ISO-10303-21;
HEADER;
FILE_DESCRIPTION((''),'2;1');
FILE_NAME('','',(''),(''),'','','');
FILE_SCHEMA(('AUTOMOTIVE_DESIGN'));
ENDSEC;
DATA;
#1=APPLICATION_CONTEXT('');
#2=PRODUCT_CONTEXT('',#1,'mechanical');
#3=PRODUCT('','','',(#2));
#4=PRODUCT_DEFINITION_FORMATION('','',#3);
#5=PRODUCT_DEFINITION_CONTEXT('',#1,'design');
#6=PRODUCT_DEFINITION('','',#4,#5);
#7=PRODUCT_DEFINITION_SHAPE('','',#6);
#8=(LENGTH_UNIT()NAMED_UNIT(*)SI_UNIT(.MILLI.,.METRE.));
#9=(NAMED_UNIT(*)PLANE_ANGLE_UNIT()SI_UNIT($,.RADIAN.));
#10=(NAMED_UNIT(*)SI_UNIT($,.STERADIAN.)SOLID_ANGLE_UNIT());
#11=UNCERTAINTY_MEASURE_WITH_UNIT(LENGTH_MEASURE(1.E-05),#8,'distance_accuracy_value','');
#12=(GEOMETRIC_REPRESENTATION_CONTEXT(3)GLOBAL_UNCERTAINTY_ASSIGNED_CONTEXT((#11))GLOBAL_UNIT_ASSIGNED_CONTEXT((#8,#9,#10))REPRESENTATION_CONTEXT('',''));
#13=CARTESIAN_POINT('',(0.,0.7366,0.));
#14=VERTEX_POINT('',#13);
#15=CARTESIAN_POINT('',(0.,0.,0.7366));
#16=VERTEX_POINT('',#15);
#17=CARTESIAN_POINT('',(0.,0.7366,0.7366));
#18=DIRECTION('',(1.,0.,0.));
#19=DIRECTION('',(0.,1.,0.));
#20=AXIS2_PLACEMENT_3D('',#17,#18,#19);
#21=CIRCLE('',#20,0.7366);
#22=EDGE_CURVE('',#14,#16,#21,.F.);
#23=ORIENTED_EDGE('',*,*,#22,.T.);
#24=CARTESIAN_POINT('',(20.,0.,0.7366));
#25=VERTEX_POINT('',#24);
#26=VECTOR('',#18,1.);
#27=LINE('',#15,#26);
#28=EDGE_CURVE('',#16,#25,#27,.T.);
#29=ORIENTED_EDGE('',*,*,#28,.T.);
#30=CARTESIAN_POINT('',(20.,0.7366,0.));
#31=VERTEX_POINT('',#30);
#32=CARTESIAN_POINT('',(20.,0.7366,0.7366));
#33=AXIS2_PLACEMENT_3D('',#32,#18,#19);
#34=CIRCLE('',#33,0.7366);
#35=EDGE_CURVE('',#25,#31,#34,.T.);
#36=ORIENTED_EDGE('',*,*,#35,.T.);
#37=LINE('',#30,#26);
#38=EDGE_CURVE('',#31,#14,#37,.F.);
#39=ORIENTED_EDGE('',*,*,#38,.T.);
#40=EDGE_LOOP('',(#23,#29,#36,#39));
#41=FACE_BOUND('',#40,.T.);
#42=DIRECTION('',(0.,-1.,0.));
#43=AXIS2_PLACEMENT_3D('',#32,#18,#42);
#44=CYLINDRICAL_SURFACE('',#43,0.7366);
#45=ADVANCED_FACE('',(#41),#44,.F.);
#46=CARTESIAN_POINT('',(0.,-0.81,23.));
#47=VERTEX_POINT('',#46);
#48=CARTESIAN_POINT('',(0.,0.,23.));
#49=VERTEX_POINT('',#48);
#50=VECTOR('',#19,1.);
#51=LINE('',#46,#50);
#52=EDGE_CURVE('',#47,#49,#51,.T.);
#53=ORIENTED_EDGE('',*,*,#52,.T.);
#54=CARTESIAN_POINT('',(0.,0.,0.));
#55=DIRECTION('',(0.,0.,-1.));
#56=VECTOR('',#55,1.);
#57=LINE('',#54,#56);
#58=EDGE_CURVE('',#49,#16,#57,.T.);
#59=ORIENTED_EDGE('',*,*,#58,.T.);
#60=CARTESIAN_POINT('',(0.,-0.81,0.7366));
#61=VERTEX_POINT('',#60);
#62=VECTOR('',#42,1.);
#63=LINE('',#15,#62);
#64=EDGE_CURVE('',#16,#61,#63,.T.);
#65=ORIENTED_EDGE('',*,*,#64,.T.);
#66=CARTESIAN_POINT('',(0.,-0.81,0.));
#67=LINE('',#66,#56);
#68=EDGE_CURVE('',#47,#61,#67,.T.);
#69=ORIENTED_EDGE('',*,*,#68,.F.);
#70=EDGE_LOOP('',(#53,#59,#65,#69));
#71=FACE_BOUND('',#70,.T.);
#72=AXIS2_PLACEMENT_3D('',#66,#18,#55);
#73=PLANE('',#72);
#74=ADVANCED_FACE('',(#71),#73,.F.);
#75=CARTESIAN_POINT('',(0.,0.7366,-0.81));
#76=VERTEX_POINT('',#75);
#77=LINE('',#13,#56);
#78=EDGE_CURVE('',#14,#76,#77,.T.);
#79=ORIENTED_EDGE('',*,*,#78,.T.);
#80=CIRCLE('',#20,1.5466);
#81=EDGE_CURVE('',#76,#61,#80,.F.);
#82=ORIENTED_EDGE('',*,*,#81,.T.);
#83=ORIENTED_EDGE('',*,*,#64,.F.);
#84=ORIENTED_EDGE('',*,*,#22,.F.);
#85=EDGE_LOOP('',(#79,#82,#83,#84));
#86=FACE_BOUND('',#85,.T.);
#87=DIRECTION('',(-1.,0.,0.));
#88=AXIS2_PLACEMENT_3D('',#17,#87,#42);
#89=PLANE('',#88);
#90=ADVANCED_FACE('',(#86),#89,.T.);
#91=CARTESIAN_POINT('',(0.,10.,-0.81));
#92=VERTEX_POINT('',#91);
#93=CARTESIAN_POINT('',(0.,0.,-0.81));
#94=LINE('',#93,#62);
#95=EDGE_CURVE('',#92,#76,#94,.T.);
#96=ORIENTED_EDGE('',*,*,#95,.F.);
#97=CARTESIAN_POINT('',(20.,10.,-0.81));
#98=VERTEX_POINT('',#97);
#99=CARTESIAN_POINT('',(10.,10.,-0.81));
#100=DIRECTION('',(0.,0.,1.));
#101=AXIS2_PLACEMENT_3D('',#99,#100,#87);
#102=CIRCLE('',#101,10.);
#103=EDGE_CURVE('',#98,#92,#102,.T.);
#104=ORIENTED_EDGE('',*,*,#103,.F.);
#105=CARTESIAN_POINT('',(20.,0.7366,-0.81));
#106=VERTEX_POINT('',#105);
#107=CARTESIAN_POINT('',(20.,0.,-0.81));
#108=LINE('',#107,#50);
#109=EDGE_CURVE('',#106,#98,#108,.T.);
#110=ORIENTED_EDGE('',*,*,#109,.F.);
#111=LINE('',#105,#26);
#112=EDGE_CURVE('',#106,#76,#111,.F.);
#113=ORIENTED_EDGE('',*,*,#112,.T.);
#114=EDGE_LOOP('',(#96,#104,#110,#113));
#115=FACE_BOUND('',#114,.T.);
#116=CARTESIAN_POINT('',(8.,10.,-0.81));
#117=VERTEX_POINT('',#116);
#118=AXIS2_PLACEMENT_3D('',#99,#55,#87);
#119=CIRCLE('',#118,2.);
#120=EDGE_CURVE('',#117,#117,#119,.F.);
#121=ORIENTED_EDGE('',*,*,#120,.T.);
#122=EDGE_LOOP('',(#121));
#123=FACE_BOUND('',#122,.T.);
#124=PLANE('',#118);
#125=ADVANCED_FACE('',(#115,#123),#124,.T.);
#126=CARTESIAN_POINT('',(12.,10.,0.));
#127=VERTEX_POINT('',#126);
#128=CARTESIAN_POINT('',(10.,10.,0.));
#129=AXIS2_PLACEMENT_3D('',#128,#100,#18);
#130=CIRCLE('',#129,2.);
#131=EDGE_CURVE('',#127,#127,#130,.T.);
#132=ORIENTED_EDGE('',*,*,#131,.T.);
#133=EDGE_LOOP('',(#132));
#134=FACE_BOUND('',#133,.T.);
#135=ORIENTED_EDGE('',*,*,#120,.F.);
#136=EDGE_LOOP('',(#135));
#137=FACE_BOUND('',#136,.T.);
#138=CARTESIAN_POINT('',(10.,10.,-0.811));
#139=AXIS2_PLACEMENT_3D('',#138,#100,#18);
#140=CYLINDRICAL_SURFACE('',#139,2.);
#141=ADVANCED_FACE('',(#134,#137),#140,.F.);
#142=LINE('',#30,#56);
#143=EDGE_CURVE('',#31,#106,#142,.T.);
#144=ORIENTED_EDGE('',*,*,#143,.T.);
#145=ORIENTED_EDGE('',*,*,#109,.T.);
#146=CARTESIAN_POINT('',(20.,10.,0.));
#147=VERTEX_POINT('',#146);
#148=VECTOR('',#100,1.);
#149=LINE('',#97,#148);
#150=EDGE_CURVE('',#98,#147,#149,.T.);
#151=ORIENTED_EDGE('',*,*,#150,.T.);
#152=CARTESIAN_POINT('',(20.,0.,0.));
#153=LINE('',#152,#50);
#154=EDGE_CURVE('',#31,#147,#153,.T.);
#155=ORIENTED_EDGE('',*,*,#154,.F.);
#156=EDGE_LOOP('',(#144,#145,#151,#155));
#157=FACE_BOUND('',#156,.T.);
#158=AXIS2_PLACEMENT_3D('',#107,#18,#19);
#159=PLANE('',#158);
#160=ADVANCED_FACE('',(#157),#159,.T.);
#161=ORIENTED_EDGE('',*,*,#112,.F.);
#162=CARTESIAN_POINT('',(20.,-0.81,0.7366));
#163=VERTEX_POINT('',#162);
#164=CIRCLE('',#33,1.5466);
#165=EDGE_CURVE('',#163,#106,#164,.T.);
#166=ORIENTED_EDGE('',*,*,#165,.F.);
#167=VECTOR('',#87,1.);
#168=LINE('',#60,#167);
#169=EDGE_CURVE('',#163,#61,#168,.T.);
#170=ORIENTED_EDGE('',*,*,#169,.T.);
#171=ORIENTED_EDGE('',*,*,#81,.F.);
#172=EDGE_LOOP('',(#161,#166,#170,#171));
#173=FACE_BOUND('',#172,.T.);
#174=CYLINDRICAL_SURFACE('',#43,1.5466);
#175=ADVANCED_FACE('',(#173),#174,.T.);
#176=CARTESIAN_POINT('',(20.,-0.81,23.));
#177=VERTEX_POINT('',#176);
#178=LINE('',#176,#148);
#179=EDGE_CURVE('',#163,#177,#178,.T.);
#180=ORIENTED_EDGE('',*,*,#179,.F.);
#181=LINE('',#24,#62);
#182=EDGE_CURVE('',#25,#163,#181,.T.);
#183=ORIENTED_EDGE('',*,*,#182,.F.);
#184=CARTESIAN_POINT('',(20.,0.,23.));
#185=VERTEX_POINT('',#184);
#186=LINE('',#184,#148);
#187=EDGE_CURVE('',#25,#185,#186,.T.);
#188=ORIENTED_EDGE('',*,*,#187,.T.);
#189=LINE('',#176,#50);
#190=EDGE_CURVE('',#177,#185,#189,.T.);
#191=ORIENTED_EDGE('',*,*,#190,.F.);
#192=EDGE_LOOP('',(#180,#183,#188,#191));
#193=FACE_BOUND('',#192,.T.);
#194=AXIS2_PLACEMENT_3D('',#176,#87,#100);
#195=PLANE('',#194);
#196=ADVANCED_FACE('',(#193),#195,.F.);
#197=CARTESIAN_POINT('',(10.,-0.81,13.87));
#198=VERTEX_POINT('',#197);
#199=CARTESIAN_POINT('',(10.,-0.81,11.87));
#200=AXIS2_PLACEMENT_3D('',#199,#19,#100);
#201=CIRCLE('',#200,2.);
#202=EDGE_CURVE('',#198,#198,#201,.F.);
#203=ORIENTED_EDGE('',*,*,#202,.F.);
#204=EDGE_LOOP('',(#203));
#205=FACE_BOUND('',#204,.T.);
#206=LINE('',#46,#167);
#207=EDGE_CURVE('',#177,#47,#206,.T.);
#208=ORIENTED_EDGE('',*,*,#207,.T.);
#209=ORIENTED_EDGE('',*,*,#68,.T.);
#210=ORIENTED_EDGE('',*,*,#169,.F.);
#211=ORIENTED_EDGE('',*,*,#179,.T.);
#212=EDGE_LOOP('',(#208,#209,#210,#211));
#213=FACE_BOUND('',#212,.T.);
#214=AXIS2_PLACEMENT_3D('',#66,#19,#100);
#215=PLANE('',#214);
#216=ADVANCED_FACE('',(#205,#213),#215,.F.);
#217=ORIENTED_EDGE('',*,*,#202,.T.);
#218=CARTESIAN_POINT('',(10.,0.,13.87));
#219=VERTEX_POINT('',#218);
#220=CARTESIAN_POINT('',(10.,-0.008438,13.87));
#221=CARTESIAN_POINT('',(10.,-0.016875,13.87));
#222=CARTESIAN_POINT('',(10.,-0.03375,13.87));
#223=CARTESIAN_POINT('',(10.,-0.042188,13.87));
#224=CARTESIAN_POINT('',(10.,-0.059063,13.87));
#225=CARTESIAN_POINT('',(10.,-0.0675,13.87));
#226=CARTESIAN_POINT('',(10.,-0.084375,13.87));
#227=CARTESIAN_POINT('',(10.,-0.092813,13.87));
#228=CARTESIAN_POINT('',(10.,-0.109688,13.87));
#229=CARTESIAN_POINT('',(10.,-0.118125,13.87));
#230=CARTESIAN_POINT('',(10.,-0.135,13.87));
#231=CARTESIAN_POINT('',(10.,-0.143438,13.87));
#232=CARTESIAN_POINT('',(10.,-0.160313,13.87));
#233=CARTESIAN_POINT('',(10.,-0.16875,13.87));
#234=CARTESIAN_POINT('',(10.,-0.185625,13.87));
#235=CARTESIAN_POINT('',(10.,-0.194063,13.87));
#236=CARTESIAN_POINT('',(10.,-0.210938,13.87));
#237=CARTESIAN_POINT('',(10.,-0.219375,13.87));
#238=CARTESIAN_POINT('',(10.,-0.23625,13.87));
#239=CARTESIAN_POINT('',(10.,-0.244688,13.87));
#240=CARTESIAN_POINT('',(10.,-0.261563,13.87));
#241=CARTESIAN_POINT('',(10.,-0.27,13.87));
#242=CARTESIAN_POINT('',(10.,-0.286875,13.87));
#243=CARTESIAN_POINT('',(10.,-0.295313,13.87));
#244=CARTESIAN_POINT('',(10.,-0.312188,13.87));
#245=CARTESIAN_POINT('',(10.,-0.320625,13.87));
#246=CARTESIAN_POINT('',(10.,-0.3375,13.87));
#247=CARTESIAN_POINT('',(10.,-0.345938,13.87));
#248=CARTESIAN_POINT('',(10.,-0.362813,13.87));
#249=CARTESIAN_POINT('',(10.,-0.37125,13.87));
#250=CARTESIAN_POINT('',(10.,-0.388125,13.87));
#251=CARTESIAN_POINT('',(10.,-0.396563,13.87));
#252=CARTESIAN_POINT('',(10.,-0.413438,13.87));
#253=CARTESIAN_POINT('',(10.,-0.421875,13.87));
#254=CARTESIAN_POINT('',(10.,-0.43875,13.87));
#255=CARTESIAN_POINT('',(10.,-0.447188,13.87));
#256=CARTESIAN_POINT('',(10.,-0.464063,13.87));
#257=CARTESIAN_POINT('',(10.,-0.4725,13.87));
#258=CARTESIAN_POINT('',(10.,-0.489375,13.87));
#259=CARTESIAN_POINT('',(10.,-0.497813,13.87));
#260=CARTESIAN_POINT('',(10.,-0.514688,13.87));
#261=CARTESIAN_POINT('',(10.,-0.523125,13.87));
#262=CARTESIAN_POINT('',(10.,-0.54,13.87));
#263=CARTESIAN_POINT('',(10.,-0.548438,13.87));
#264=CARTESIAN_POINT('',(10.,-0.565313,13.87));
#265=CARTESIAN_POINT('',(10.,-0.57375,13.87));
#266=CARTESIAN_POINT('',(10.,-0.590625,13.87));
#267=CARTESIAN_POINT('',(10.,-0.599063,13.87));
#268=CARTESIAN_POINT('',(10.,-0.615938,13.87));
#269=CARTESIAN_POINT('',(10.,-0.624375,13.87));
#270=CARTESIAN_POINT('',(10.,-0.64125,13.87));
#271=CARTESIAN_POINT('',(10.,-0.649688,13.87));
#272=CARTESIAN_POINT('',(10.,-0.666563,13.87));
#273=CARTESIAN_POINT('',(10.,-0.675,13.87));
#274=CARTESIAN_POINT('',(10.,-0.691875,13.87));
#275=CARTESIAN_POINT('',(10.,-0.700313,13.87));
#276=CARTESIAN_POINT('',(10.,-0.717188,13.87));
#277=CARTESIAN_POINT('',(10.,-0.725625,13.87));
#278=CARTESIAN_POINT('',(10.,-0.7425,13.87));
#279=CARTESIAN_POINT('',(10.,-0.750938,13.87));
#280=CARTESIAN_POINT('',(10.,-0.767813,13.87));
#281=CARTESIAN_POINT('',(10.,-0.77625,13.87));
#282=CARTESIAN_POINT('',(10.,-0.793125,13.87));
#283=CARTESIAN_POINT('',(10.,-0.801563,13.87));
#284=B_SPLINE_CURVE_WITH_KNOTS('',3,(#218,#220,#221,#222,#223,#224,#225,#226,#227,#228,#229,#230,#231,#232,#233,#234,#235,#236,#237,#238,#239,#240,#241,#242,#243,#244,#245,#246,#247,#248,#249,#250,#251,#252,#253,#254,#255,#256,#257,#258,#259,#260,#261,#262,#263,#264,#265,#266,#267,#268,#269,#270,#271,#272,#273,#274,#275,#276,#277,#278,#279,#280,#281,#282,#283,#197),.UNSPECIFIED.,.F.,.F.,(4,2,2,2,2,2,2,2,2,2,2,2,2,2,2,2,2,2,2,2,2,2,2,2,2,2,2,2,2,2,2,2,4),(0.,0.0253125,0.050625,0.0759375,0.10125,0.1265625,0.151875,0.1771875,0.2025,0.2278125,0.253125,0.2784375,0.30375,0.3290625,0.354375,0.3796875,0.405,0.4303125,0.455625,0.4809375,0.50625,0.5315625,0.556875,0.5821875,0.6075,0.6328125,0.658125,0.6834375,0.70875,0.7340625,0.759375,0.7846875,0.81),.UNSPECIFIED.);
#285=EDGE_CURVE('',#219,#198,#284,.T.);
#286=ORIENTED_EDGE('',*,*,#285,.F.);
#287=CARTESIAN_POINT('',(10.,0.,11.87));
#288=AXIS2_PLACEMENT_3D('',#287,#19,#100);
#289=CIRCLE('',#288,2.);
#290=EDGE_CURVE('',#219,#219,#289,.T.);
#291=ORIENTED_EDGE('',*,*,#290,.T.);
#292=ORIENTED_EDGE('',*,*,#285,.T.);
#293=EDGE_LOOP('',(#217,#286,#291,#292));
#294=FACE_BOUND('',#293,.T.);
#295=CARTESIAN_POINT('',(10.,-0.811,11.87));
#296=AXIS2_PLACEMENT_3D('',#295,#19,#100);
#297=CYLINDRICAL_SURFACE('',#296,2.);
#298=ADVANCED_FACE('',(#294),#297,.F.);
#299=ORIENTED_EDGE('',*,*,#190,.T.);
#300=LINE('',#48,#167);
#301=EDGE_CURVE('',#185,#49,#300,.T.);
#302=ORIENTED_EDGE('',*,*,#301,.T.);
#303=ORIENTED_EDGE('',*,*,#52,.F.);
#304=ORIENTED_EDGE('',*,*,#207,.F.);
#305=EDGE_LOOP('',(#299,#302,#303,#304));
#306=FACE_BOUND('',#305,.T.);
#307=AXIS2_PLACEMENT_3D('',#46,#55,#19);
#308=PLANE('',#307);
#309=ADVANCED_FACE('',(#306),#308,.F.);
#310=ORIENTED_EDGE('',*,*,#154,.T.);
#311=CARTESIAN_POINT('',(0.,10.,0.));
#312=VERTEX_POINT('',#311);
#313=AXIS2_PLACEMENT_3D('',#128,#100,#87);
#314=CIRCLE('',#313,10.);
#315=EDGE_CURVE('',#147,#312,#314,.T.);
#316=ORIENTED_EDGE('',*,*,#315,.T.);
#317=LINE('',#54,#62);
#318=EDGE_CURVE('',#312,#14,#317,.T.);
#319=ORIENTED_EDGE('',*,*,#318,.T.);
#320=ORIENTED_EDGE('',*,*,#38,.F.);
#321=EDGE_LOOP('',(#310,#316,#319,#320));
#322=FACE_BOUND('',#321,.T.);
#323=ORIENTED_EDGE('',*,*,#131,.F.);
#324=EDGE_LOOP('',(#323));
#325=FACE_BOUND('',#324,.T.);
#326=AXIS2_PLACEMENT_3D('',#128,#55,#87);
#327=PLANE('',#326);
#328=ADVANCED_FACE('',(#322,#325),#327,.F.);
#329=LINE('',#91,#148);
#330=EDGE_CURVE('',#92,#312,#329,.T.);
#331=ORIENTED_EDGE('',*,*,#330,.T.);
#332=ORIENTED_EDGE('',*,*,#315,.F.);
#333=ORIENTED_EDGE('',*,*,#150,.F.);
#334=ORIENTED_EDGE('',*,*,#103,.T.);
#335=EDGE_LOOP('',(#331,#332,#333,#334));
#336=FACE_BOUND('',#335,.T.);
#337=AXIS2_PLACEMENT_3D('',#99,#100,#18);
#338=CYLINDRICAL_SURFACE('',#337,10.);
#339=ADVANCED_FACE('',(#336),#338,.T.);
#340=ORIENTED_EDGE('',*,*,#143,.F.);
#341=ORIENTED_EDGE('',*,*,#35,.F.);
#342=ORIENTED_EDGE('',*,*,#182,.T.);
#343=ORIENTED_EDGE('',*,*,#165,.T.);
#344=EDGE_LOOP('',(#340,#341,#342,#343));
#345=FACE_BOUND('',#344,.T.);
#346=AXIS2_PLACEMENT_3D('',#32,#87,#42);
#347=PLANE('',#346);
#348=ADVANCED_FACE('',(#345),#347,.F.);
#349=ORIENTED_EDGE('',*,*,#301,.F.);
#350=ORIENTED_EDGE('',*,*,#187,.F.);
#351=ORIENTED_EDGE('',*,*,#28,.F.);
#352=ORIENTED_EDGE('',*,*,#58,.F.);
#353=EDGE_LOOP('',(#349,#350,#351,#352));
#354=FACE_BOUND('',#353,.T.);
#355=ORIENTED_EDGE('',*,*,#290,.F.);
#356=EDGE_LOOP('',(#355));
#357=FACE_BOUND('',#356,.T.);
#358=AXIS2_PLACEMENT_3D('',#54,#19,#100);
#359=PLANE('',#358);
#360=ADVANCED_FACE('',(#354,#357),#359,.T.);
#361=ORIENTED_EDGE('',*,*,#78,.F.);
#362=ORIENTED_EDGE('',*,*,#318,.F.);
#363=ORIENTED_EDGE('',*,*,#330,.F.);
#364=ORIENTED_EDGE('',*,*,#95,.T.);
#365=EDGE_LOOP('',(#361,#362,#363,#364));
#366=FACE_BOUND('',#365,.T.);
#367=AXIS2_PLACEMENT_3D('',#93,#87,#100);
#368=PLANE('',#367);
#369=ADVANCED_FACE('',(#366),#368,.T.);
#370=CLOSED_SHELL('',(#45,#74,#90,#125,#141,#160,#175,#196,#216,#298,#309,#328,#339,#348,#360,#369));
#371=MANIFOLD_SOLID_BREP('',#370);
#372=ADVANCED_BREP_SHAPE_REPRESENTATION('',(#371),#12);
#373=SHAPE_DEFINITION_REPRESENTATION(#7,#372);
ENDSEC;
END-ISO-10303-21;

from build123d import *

# Parameters (mm, degrees)
BASE_FLANGE1_DEPTH           = 0.81
EDGE_FLANGE1_STRIP_W         = 4.7132
EDGE_FLANGE1_STRIP_H         = 0.81
EDGE_FLANGE1_STRIP_CUT_DEPTH = 20
EDGE_FLANGE1_DEPTH           = 20
CUT_EXTRUDE1_REACH           = 38.455
SKETCH9_R                    = 2
CUT_EXTRUDE2_REACH           = 38.455
SKETCH10_R                   = 2


# Sheet-metal steps are written as plain solids
with BuildPart() as part:
    # Sketch1 → Base-Flange1 (new body)
    with BuildSketch(Plane.XY):
        with BuildLine():
            Line((0, 0), (20, 0))
            Line((20, 0), (20, 10))
            ThreePointArc((20, 10), (10, 20), (0, 10))
            Line((0, 10), (0, 0))
        make_face()
    extrude(amount=-BASE_FLANGE1_DEPTH)

    # Edge-Flange1 strip (across the edge) → Edge-Flange1 strip cut (cut)
    with BuildSketch(Plane.YZ):
        with Locations((-1.62, -0.405)):
            Rectangle(EDGE_FLANGE1_STRIP_W, EDGE_FLANGE1_STRIP_H)
    extrude(amount=EDGE_FLANGE1_STRIP_CUT_DEPTH, mode=Mode.SUBTRACT)

    # Edge-Flange1 section (across the edge) → Edge-Flange1 (add)
    with BuildSketch(Plane.YZ):
        with BuildLine():
            Line((-0.81, 0.7366), (-0.81, 23))
            Line((-0.81, 23), (0, 23))
            Line((0, 23), (0, 0.7366))
            ThreePointArc((0, 0.7366), (0.215745145, 0.215745145), (0.7366, 0))
            Line((0.7366, 0), (0.7366, -0.81))
            ThreePointArc((0.7366, -0.81), (-0.357011348, -0.357011348), (-0.81, 0.7366))
        make_face()
    extrude(amount=EDGE_FLANGE1_DEPTH)

    # Sketch9 → Cut-Extrude1 (cut, up to next)
    with BuildSketch(Plane.XY, mode=Mode.PRIVATE) as cut_extrude1_sk1:
        with Locations((10, 10)):
            Circle(SKETCH9_R)
    cut_extrude1_tool1 = extrude(cut_extrude1_sk1.sketch, amount=-CUT_EXTRUDE1_REACH, mode=Mode.PRIVATE) & part.part
    add(cut_extrude1_tool1.solids().sort_by_distance((10, 10, 0))[0], mode=Mode.SUBTRACT)

    # Sketch10 → Cut-Extrude2 (cut, up to next)
    with BuildSketch(Plane(origin=(0, 0, 0), x_dir=(1, 0, 0), z_dir=(0, 1, 0)), mode=Mode.PRIVATE) as cut_extrude2_sk1:
        with Locations(Location((10, -11.87, 0), (0, 0, 270))):
            Circle(SKETCH10_R)
    cut_extrude2_tool1 = extrude(cut_extrude2_sk1.sketch, amount=-CUT_EXTRUDE2_REACH, mode=Mode.PRIVATE) & part.part
    add(cut_extrude2_tool1.solids().sort_by_distance((10, 0, 11.87))[0], mode=Mode.SUBTRACT)


solid = part.part
